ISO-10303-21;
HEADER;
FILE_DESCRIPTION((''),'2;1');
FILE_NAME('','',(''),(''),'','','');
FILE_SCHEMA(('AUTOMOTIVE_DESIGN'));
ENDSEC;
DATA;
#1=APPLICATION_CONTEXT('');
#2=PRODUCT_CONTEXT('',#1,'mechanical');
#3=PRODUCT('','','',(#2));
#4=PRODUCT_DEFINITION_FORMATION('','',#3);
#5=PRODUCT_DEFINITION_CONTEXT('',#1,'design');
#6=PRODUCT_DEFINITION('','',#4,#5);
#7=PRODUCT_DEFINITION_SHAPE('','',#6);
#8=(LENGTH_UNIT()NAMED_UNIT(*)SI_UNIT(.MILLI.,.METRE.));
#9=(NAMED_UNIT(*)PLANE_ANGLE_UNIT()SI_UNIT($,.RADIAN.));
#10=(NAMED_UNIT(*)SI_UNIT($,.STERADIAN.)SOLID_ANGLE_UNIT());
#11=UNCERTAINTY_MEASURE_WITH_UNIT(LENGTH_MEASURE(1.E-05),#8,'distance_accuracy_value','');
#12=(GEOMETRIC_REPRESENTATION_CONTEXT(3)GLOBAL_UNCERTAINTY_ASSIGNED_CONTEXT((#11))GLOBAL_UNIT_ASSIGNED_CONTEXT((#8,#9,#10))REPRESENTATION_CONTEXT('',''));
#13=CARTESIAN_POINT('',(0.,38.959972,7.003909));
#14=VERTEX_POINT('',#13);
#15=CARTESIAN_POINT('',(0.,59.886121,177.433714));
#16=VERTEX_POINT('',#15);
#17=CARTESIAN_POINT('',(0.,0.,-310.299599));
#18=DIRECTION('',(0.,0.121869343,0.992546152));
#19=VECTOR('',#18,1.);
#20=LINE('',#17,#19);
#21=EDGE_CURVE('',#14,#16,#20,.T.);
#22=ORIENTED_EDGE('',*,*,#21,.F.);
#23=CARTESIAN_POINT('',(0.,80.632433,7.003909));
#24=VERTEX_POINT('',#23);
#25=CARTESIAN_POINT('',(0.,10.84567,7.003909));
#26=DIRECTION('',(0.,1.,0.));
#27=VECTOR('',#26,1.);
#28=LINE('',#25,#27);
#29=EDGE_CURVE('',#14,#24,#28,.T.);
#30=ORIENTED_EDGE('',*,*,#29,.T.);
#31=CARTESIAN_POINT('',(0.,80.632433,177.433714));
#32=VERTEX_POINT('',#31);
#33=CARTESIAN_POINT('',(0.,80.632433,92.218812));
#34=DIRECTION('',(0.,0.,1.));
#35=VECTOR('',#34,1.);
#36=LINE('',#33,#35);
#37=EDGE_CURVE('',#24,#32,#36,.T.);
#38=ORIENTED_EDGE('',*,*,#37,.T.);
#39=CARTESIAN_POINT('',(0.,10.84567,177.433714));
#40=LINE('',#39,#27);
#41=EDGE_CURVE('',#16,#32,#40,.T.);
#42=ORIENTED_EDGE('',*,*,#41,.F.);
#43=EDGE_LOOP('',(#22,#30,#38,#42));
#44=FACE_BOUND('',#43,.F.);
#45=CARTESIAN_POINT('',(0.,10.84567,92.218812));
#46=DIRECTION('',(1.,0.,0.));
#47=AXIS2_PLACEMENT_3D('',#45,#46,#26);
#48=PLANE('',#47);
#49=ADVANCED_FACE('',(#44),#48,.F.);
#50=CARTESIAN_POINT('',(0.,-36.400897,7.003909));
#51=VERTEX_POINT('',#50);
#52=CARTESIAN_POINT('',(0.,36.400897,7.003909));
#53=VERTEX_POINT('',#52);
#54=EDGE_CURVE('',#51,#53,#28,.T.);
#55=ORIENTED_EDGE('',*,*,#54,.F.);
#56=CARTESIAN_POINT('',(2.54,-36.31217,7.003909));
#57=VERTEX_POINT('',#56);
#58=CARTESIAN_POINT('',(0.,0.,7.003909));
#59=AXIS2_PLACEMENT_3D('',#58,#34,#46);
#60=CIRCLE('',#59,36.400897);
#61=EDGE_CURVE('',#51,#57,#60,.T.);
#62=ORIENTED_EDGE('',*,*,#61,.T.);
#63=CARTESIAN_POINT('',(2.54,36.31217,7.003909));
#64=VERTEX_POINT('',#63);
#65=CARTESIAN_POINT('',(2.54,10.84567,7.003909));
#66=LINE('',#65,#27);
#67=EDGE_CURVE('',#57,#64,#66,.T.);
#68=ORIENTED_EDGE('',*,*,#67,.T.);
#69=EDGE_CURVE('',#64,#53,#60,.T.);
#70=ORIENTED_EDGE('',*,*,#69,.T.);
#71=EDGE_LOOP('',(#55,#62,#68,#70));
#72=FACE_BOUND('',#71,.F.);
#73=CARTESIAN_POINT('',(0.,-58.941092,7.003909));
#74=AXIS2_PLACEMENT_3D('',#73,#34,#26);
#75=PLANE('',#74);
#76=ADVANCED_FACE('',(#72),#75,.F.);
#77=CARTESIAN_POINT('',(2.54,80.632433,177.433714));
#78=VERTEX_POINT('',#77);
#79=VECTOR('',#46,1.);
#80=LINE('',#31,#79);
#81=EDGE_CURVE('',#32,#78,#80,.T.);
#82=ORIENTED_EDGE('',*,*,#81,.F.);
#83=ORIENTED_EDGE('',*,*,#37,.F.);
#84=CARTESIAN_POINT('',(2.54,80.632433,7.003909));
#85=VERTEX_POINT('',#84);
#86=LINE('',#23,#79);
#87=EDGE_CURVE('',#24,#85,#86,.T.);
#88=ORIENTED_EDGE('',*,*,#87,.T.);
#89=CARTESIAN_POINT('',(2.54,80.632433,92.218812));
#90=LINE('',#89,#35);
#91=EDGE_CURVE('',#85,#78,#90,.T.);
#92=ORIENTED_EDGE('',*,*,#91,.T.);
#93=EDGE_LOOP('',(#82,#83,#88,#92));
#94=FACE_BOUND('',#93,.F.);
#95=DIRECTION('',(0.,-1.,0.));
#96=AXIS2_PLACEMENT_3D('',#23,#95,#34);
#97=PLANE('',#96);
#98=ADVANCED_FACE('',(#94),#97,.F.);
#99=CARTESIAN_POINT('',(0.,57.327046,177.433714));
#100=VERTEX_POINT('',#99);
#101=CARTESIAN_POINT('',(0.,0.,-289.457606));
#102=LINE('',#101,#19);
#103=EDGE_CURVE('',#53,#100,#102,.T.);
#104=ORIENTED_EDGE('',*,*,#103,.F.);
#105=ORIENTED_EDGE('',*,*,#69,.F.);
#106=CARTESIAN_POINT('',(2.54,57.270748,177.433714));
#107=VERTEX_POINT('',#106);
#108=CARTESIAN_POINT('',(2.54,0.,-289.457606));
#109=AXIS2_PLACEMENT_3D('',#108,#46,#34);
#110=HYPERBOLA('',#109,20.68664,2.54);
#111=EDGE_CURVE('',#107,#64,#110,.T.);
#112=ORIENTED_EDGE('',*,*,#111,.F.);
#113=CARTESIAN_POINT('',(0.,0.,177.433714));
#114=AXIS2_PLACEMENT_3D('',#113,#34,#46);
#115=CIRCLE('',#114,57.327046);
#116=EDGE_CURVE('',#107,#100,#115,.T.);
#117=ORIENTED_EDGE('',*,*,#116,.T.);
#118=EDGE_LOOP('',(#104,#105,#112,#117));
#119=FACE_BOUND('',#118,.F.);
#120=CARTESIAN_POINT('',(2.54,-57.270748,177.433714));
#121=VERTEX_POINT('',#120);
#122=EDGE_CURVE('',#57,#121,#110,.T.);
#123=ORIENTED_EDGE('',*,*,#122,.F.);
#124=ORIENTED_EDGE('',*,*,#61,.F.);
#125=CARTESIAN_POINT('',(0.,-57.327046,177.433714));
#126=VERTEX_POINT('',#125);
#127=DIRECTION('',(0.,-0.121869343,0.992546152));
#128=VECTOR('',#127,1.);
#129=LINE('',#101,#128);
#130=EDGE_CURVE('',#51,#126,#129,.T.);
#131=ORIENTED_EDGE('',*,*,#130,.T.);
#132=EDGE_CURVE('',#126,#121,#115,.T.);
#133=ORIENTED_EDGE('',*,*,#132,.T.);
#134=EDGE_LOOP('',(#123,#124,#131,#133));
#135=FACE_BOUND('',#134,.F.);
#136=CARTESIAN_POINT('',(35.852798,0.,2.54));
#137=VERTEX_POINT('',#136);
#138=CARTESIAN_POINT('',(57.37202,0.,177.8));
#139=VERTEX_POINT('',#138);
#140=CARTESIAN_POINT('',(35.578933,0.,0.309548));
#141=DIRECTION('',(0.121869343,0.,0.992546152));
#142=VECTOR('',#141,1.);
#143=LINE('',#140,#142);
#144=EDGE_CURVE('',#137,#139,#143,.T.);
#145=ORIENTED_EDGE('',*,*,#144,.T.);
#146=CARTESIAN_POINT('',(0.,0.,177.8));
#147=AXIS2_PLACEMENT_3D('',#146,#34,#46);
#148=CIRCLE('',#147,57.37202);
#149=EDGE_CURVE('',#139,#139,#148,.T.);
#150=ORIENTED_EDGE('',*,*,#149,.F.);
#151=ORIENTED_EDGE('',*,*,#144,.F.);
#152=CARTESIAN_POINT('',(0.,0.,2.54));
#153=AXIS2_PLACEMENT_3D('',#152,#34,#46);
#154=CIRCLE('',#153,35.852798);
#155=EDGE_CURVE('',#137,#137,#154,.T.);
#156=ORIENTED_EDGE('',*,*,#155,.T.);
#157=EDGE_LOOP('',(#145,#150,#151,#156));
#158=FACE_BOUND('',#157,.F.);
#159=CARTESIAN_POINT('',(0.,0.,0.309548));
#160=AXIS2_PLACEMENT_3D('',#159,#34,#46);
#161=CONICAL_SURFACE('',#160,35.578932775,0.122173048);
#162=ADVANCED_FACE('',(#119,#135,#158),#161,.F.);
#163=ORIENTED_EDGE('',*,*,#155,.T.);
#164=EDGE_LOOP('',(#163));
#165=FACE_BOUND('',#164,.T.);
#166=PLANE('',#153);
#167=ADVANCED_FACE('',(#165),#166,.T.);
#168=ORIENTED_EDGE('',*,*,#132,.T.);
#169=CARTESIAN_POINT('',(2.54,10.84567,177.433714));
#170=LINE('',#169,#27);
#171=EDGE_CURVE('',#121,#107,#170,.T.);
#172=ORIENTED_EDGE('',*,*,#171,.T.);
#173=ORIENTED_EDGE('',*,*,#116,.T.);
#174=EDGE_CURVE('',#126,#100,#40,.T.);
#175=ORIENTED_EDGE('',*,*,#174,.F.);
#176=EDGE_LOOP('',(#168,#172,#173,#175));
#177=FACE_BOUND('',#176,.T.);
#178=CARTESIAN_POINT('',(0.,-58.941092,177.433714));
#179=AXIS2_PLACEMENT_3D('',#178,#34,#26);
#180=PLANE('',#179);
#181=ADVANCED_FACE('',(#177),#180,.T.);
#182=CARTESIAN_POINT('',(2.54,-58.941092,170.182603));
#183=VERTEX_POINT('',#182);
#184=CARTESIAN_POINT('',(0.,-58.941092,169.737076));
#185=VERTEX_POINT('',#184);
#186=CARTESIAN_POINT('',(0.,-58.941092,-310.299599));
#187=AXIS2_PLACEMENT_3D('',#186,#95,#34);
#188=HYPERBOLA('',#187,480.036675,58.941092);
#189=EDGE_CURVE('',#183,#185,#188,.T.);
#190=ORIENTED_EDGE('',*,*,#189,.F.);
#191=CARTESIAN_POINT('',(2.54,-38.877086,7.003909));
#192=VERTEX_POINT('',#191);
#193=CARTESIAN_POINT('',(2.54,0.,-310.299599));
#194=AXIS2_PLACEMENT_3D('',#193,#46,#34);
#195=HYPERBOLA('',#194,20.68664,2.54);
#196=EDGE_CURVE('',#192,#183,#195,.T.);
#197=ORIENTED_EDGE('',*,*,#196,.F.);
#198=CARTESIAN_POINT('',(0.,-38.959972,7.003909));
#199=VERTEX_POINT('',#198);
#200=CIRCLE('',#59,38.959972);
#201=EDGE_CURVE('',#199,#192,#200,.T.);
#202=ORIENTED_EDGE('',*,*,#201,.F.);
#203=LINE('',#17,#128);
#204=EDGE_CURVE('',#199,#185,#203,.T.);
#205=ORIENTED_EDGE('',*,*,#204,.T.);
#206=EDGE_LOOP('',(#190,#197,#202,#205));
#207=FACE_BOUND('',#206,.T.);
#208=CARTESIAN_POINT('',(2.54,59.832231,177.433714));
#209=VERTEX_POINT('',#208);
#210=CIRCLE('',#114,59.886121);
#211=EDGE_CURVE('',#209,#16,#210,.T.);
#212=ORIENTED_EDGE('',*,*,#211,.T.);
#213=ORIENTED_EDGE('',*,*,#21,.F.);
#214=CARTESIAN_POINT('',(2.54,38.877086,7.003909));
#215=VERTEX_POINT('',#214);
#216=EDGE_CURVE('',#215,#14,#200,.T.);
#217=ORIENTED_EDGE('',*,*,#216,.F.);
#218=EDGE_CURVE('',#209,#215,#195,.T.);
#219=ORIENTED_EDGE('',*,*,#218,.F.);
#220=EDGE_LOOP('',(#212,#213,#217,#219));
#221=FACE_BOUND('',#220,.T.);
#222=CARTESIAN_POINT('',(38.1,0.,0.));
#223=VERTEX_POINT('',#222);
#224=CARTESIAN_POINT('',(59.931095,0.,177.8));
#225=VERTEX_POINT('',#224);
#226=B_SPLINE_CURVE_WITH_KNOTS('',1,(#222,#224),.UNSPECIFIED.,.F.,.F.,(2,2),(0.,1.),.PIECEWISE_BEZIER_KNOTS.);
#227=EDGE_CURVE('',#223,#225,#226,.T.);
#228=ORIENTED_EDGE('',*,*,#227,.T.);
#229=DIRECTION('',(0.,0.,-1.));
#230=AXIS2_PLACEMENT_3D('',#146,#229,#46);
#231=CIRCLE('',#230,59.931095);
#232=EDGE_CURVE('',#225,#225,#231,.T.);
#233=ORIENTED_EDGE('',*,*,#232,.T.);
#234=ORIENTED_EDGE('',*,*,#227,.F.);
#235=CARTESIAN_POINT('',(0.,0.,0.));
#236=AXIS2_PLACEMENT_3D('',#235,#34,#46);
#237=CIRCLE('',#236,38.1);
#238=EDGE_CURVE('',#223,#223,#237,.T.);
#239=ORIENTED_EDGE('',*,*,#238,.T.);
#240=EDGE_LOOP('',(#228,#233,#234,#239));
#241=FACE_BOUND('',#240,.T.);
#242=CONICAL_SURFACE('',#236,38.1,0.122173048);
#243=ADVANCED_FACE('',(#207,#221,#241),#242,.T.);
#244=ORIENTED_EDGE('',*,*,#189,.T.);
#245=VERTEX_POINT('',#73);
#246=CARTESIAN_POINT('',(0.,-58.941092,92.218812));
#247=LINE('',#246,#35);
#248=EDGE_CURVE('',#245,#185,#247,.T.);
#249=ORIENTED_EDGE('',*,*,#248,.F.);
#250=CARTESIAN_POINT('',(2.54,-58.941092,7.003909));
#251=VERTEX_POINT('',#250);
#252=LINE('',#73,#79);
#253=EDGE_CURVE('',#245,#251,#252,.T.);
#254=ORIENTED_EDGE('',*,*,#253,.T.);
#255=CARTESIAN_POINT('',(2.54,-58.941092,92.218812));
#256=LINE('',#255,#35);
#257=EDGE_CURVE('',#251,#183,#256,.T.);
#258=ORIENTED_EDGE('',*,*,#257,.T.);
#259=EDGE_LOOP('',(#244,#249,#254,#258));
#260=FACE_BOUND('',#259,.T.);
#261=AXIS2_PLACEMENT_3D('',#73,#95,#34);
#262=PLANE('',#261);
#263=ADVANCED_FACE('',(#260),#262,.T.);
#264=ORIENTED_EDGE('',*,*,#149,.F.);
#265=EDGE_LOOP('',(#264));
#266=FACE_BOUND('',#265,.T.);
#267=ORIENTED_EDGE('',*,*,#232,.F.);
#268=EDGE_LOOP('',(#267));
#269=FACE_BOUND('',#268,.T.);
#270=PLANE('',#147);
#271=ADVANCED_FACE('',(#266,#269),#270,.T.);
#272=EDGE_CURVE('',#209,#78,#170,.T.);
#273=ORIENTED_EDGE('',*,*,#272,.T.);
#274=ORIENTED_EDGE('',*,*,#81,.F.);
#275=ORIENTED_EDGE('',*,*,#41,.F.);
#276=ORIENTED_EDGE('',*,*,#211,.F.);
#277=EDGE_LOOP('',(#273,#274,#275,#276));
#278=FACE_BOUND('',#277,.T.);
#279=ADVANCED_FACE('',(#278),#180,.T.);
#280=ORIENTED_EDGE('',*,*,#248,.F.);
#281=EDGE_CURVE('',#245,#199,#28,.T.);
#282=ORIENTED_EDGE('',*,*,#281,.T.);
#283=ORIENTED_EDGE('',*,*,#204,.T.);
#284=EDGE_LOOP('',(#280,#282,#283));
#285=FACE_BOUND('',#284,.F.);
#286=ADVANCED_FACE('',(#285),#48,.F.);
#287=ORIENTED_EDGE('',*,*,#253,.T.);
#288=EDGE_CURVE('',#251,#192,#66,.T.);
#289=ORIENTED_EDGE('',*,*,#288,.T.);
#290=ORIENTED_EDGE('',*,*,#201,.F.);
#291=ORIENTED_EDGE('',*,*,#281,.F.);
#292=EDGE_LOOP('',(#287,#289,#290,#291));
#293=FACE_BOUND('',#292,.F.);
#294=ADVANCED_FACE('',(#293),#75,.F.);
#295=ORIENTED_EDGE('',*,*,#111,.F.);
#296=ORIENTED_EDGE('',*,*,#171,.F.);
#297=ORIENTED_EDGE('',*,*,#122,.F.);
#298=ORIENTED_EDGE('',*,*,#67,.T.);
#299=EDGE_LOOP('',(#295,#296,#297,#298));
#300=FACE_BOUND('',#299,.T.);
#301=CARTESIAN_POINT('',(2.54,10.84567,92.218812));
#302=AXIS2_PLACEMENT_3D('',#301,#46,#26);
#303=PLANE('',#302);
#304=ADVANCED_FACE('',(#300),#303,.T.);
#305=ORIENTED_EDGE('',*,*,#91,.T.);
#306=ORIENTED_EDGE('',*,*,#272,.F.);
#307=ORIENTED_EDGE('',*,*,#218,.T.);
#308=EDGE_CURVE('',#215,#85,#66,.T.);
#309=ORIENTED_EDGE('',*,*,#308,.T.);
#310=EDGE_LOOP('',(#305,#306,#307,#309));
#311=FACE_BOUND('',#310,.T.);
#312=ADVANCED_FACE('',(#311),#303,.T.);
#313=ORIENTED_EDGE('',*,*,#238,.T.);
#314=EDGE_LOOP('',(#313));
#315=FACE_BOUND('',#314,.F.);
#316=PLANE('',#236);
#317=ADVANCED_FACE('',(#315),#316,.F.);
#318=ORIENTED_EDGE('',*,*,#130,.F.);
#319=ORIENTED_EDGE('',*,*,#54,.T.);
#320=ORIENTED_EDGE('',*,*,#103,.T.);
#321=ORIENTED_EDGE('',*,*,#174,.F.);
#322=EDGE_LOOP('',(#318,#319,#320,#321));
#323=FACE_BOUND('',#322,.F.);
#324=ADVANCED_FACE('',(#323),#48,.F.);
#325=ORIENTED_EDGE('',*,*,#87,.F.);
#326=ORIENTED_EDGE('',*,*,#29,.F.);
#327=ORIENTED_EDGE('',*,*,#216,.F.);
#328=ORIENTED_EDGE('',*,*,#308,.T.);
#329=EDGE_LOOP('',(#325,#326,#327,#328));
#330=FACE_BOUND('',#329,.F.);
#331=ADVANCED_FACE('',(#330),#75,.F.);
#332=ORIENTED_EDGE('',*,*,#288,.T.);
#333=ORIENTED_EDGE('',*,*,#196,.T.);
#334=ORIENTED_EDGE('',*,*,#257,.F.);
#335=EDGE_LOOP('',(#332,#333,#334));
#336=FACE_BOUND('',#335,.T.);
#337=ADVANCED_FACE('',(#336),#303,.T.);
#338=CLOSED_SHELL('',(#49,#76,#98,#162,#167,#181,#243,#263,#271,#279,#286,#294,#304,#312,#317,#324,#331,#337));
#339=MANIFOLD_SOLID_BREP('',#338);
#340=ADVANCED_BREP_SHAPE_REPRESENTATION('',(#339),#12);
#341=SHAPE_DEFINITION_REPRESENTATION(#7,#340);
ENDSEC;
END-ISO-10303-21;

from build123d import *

# Parameters (mm, degrees)
F0_R     = 38.1
F1_DEPTH = 177.8
F1_TAPER = -7
F2_T     = -2.54
F3_W     = 139.5735256374
F3_H     = 170.4298052937
F4_DEPTH = 2.54


# Not quite as in the source:
# - a feature names something its author has since deleted; it is built from what else it names


with BuildPart() as f1:
    # F0 (on Top) → F1 (new body)
    with BuildSketch(Plane.XY):
        Circle(F0_R)
    extrude(amount=F1_DEPTH, taper=F1_TAPER)

    # F2
    f2_openings = [f1.faces().sort_by_distance(p)[0] for p in [
        (0, 0, 177.8),
    ]]
    offset(amount=F2_T, openings=f2_openings, kind=Kind.INTERSECTION)

    # F3 (on Right) → F4 (join)
    with BuildSketch(Plane.YZ):
        with Locations((10.8456704766, 92.2188116238)):
            Rectangle(F3_W, F3_H)
    extrude(amount=F4_DEPTH)


solid = f1.part
